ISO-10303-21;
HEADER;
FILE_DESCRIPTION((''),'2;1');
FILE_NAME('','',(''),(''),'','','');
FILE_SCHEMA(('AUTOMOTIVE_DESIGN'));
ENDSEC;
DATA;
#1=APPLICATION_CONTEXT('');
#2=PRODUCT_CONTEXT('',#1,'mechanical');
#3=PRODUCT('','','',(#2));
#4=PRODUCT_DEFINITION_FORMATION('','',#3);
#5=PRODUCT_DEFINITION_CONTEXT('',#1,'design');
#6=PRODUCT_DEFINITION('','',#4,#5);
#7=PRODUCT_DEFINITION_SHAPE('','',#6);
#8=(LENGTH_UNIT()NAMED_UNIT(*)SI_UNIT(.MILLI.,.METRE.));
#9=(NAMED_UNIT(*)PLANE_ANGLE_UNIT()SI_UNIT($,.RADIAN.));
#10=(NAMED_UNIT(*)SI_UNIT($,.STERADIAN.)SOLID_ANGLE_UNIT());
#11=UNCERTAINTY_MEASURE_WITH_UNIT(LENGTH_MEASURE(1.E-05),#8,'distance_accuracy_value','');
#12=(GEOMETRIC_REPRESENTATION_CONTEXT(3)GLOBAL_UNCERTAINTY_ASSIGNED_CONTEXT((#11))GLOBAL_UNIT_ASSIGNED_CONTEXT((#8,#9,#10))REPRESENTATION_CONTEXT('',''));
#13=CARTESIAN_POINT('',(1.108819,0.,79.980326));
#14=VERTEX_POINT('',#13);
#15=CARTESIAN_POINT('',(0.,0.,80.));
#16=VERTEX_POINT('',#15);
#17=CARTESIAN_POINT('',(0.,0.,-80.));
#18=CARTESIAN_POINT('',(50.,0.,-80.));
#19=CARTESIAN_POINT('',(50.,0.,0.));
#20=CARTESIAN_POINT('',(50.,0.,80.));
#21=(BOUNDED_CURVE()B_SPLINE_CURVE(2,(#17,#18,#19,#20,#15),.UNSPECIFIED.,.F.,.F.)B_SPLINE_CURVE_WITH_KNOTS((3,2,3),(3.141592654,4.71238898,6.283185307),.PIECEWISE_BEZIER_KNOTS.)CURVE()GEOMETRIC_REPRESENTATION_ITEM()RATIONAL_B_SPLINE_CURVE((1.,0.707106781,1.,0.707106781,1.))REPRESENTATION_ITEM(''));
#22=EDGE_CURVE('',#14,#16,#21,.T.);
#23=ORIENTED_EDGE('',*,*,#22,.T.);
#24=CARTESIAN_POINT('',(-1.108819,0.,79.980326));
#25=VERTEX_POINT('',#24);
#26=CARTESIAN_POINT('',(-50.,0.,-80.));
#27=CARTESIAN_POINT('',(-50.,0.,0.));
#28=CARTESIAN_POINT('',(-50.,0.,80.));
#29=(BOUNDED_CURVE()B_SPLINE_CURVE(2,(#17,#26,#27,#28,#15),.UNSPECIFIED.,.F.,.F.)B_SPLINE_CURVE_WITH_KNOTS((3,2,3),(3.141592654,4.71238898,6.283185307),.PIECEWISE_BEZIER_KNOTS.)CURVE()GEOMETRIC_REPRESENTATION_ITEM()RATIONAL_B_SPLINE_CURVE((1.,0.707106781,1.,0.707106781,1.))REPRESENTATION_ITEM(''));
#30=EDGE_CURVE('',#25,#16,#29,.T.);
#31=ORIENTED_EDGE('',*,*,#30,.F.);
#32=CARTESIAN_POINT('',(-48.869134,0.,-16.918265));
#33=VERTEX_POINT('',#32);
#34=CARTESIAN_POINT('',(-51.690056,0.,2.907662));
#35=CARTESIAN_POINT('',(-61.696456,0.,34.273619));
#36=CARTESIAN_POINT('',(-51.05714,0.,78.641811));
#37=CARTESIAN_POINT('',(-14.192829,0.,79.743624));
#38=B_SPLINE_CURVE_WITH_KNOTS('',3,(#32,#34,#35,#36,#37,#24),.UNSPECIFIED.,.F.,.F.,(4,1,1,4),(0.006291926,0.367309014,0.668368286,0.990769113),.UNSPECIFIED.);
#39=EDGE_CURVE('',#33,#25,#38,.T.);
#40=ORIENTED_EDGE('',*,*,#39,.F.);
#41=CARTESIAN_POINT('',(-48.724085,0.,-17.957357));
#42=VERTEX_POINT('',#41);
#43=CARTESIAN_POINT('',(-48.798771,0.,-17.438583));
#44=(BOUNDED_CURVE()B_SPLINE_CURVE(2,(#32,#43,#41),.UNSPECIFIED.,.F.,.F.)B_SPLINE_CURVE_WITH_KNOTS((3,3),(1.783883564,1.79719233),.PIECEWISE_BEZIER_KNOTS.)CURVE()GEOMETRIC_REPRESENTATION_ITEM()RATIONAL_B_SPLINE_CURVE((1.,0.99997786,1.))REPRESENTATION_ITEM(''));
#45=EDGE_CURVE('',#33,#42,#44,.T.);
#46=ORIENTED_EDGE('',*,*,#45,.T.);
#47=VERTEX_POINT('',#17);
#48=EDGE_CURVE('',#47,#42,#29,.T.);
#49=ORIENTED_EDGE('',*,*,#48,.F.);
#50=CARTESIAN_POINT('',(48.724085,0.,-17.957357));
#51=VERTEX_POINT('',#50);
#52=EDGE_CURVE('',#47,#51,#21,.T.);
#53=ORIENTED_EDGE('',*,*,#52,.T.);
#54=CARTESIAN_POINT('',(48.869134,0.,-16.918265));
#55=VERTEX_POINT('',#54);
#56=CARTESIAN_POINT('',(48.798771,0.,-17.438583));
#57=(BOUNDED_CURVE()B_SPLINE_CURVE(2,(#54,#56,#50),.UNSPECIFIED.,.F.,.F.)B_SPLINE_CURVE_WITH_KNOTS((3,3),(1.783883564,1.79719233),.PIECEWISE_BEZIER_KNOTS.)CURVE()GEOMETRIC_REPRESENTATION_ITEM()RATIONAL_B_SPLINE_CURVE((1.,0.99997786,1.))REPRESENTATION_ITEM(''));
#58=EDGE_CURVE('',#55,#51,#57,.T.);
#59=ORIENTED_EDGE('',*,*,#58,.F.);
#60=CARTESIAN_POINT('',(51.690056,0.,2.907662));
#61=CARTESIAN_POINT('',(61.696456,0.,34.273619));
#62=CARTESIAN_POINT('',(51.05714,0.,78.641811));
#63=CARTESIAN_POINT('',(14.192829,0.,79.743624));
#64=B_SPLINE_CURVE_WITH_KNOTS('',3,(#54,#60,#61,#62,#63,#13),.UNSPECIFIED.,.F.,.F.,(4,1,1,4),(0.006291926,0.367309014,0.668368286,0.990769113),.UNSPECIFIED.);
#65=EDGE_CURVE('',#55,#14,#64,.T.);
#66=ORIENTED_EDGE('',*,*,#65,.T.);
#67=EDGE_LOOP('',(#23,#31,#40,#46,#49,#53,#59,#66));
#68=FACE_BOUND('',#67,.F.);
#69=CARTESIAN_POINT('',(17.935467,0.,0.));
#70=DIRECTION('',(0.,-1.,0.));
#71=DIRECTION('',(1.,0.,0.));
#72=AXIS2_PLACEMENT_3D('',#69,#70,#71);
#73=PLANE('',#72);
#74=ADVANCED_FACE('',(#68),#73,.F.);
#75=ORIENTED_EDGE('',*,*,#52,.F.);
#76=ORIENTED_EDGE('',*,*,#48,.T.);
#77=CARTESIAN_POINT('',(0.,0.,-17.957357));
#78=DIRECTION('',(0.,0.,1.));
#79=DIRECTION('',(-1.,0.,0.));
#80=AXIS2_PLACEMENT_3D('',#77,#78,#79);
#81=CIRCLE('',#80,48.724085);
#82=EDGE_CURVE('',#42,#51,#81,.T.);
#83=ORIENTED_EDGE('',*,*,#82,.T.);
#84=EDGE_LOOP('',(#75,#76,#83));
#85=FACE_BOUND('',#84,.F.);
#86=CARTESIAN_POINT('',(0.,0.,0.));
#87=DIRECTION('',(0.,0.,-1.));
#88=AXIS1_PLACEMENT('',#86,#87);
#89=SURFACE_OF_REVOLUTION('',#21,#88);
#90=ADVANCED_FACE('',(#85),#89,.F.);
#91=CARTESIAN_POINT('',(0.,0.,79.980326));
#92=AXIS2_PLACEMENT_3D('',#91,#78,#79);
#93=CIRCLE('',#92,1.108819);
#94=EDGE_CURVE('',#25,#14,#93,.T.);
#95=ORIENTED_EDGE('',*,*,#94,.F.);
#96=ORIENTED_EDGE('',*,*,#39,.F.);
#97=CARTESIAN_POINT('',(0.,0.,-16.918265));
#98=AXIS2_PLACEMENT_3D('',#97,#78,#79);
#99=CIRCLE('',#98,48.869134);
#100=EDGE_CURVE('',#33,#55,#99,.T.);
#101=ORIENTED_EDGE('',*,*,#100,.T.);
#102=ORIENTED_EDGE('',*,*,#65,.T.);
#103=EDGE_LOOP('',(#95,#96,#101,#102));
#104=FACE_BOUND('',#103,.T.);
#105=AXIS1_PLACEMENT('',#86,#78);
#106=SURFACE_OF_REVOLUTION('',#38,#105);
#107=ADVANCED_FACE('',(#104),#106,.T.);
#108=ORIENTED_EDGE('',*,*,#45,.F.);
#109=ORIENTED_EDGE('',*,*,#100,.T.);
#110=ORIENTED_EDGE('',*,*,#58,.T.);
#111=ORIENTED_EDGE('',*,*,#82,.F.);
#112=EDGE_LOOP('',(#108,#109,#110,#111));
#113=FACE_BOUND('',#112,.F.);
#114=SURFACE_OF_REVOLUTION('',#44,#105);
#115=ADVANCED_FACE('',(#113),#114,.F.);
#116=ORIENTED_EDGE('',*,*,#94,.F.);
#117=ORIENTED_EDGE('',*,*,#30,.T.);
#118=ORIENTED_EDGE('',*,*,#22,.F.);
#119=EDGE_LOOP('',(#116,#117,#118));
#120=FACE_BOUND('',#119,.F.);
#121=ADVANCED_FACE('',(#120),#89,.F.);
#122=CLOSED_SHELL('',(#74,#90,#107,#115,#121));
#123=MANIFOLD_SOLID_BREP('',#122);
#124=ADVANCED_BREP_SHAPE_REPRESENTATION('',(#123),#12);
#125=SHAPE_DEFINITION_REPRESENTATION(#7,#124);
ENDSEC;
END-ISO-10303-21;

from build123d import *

# Parameters (mm, degrees)
F1_ANGLE = 180
F3_ANGLE = 180


with BuildPart() as f1:
    # F0 (on Front) → F1 (revolve)
    with BuildSketch(Plane.XZ):
        with BuildLine():
            Line((0, 80), (0, -80))
            add(Edge.make_bspline(
                [(0, -80), (50, -80), (50, 0), (50, 80), (0, 80)],
                knots=[3.1415926536, 3.1415926536, 3.1415926536, 4.7123889804, 4.7123889804, 6.2831853072, 6.2831853072, 6.2831853072], degree=2, weights=[1, 0.7071067812, 1, 0.7071067812, 1]))
        make_face()
    revolve(axis=Axis((0, 0, 0), (0, 0, -1)), revolution_arc=F1_ANGLE)

    # F2 (on Front) → F3 (revolve)
    with BuildSketch(Plane.XZ):
        with BuildLine():
            add(Edge.make_bspline(
                [(-48.8691344885, -16.9182652042), (-48.7987705621, -17.4385832037), (-48.7240850007, -17.9573568365)],
                knots=[1.783883564, 1.783883564, 1.783883564, 1.7971923305, 1.7971923305, 1.7971923305], degree=2, weights=[1, 0.9999778597, 1]))
            add(Edge.make_bspline(
                [(-48.7240850007, -17.9573568365), (-48.7716070362, -17.6101579438), (-48.8199705199, -17.2637980693), (-48.8691344885, -16.9182652042)],
                knots=[0, 0, 0, 0, 0.0062919262, 0.0062919262, 0.0062919262, 0.0062919262], degree=3))
        make_face()
        with BuildLine():
            add(Edge.make_bspline(
                [(-48.7240850007, -17.9573568365), (-48.7716070362, -17.6101579438), (-48.8199705199, -17.2637980693), (-48.8691344885, -16.9182652042)],
                knots=[0, 0, 0, 0, 0.0062919262, 0.0062919262, 0.0062919262, 0.0062919262], degree=3))
            add(Edge.make_bspline(
                [(-48.7240850007, -17.9573568365), (-39.7920781648, -80), (0, -80)],
                knots=[1.7971923305, 1.7971923305, 1.7971923305, 3.1415926536, 3.1415926536, 3.1415926536], degree=2, weights=[1, 0.7824535004, 1]))
            Line((0, -80), (0, 80))
            add(Edge.make_bspline(
                [(-1.108818783, 79.9803259153), (-0.7342012018, 79.9871031051), (-0.3644851316, 79.9936072588), (0, 80)],
                knots=[0.9907691128, 0.9907691128, 0.9907691128, 0.9907691128, 1, 1, 1, 1], degree=3))
            add(Edge.make_bspline(
                [(-48.8691344885, -16.9182652042), (-51.690056449, 2.9076616941), (-61.6964555806, 34.2736191316), (-51.0571402446, 78.6418106223), (-14.1928285059, 79.7436236842), (-1.108818783, 79.9803259153)],
                knots=[0.0062919262, 0.0062919262, 0.0062919262, 0.0062919262, 0.3673090138, 0.6683682859, 0.9907691128, 0.9907691128, 0.9907691128, 0.9907691128], degree=3))
        make_face()
        with BuildLine():
            add(Edge.make_bspline(
                [(0, 80), (-0.5544775717, 80), (-1.108818783, 79.9803259153)],
                knots=[0, 0, 0, 0.0221781938, 0.0221781938, 0.0221781938], degree=2, weights=[1, 0.9999385166, 1]))
            add(Edge.make_bspline(
                [(-1.108818783, 79.9803259153), (-0.7342012018, 79.9871031051), (-0.3644851316, 79.9936072588), (0, 80)],
                knots=[0.9907691128, 0.9907691128, 0.9907691128, 0.9907691128, 1, 1, 1, 1], degree=3))
        make_face()
    revolve(axis=Axis((0, 0, 0), (0, 0, 1)), revolution_arc=F3_ANGLE)


solid = f1.part
